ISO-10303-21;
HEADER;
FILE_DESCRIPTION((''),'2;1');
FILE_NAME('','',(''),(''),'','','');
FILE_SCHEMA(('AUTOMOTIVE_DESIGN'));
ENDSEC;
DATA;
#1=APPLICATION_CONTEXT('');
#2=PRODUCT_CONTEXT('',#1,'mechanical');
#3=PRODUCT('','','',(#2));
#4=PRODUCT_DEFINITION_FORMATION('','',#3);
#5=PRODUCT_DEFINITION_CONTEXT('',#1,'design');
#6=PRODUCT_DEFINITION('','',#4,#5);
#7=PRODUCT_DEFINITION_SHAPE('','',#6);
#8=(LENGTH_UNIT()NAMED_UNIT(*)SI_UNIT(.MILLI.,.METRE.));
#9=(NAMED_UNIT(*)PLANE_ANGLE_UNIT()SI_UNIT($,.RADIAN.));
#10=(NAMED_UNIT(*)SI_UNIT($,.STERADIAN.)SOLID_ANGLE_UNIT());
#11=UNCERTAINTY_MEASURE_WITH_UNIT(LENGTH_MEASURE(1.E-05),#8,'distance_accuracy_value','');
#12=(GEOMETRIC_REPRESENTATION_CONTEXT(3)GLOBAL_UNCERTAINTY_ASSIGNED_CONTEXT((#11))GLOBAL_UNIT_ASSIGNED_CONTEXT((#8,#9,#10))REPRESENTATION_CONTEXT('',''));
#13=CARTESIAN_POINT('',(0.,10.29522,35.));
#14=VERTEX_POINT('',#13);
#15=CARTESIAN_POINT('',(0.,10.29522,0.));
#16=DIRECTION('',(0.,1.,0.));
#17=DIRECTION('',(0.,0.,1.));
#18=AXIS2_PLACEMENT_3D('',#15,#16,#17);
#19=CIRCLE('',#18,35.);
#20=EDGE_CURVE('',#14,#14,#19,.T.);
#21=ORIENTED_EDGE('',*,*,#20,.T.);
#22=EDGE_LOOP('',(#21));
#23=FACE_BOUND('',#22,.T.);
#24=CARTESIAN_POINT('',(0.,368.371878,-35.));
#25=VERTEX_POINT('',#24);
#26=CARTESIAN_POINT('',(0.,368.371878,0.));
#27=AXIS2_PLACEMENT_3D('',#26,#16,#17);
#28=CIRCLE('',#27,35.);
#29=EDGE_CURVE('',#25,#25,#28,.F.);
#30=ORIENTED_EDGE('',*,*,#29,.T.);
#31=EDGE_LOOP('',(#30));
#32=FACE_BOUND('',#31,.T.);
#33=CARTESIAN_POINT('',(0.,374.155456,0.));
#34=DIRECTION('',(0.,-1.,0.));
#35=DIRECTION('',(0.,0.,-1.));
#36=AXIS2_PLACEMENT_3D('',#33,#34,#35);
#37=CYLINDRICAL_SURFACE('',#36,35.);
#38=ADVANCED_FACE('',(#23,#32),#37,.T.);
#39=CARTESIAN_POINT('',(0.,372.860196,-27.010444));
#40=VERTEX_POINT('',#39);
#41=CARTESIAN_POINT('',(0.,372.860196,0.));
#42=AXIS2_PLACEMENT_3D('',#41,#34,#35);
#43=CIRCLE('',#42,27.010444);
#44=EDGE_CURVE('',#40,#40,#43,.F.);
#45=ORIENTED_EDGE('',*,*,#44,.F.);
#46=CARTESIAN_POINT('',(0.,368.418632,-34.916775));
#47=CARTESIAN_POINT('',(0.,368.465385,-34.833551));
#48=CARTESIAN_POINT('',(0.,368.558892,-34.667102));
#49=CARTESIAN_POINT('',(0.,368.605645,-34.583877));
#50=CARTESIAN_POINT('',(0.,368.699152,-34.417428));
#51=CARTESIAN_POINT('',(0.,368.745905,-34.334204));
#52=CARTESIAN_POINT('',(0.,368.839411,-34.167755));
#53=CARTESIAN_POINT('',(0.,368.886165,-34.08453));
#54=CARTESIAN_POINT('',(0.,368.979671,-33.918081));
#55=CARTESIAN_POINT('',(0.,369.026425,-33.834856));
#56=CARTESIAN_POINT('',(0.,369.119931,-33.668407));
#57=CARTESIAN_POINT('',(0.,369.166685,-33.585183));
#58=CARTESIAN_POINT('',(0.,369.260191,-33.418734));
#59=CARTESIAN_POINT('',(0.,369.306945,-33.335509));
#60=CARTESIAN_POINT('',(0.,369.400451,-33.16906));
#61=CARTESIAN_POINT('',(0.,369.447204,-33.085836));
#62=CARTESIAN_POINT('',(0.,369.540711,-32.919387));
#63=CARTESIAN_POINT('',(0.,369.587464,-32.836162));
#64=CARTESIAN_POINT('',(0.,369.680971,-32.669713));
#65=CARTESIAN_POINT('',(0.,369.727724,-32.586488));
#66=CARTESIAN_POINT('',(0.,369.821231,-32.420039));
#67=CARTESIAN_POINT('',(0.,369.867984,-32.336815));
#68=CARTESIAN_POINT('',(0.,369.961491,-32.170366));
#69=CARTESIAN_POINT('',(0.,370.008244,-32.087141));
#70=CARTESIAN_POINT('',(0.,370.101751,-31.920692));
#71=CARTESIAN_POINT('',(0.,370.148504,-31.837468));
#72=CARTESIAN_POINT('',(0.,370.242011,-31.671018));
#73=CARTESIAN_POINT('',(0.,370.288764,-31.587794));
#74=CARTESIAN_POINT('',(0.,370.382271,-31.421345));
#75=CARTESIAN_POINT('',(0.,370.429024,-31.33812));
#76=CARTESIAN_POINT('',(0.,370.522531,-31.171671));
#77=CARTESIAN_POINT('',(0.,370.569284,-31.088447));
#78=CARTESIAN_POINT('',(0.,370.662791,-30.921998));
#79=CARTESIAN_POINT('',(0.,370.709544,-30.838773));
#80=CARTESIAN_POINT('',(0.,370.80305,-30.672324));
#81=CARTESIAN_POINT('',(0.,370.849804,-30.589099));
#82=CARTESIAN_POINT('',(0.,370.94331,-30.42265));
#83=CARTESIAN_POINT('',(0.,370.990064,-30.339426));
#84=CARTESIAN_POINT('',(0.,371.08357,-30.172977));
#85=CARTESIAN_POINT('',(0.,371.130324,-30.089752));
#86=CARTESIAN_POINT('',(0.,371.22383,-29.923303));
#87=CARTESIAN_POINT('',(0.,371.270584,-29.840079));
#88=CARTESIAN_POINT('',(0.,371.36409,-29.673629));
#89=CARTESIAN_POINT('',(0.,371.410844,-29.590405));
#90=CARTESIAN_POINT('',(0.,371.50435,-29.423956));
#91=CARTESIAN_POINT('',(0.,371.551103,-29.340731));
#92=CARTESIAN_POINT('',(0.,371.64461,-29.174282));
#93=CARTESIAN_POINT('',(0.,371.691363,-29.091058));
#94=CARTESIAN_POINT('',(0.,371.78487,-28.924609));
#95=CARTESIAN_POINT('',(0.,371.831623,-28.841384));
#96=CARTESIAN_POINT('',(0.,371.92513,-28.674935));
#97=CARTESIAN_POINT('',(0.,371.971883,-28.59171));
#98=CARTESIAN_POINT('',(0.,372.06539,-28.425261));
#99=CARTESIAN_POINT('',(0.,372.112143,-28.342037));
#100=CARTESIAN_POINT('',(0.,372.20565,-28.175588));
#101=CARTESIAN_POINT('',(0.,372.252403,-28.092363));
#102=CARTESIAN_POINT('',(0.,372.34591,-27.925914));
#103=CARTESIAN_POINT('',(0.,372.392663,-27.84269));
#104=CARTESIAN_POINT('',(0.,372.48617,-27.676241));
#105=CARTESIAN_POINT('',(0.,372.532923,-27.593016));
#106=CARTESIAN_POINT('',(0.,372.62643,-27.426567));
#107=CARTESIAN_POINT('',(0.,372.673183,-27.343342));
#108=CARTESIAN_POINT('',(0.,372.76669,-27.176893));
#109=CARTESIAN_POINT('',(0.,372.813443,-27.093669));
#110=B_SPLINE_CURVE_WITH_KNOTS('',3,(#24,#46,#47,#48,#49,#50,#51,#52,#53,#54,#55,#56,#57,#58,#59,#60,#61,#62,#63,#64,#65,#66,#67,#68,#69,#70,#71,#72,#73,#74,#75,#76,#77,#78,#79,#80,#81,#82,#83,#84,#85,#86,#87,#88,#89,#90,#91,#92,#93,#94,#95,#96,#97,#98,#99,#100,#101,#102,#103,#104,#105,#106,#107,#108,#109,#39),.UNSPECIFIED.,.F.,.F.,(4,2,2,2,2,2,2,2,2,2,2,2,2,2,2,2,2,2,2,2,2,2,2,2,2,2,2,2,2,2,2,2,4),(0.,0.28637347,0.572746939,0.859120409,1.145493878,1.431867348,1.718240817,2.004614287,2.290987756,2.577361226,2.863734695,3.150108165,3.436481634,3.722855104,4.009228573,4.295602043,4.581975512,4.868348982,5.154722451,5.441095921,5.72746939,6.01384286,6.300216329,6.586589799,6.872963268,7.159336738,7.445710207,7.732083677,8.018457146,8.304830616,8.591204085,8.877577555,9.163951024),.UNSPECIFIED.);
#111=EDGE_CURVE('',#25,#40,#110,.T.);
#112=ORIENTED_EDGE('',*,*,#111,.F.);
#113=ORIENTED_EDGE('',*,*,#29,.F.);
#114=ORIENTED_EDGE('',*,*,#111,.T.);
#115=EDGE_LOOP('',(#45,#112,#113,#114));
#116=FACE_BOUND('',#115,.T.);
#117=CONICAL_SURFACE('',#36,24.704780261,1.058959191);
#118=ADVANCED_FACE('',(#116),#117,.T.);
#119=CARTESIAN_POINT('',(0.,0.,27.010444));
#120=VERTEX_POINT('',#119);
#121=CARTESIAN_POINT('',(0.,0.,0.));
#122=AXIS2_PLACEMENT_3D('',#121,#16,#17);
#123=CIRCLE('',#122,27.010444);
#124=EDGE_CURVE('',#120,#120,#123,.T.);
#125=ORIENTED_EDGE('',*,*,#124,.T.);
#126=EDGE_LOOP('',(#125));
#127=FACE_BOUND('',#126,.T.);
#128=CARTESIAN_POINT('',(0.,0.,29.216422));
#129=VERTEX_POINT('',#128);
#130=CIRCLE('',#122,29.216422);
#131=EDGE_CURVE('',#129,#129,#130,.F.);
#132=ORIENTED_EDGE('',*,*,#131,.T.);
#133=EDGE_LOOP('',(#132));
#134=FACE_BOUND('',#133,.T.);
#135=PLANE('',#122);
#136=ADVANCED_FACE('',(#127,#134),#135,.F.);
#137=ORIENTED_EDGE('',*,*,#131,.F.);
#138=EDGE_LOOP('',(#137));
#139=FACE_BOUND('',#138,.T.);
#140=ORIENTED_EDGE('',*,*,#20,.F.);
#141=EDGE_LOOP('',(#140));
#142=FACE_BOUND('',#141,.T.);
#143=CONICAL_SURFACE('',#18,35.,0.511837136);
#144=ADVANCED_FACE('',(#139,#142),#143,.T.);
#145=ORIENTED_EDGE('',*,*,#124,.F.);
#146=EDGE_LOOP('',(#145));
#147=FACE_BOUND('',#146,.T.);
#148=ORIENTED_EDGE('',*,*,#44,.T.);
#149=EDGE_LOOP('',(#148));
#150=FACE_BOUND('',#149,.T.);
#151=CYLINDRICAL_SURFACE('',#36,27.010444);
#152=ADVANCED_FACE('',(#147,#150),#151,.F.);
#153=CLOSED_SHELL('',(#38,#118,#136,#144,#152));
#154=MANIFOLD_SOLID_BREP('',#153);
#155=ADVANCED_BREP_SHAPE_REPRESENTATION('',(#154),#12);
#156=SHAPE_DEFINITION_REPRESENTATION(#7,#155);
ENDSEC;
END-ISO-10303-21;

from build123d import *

# Parameters (mm, degrees)
SKETCH1_R           = 35
BOSS_EXTRUDE1_DEPTH = 374.155456
SKETCH2_R           = 27.010444237
CUT_EXTRUDE1_DEPTH  = 378.41529547
CHAMFER1_SIZE       = 5.783578
CHAMFER1_SIZE_2     = 10.29522


with BuildPart() as part:
    # Sketch1 → Boss-Extrude1 (new body)
    with BuildSketch(Plane(origin=(0, 0, 0), x_dir=(1, 0, 0), z_dir=(0, 1, 0))):
        with Locations(Location((0, 0, 0), (0, 0, 270))):
            Circle(SKETCH1_R)
    extrude(amount=BOSS_EXTRUDE1_DEPTH)

    # Sketch2 → Cut-Extrude1 (cut, through all)
    with BuildSketch(Plane(origin=(0, 0, 0), x_dir=(1, 0, 0), z_dir=(0, 1, 0))):
        with Locations(Location((0, 0, 0), (0, 0, 270))):
            Circle(SKETCH2_R)
    extrude(amount=CUT_EXTRUDE1_DEPTH, mode=Mode.SUBTRACT)

    # Chamfer1
    # the kernel refuses this chamfer: 10.29522, 5.783578 mm, written as the material it takes off along each edge
    with BuildSketch(Plane(origin=(0, 374.155456, 0), x_dir=(0, 0, 1), z_dir=(-1, 0, 0))) as chamfer1_piece_1:
        Polygon((35, -CHAMFER1_SIZE), (35 - CHAMFER1_SIZE_2, 0), (35, 0), align=None)
    revolve(axis=Axis((0, 374.155456, 0), (0, 1, 0)), mode=Mode.SUBTRACT)
    with BuildSketch(Plane(origin=(0, 0, 0), x_dir=(0, 0, 1), z_dir=(-1, 0, 0))) as chamfer1_piece_2:
        Polygon((35, CHAMFER1_SIZE_2), (35 - CHAMFER1_SIZE, 0), (35, 0), align=None)
    revolve(axis=Axis((0, 0, 0), (0, 1, 0)), mode=Mode.SUBTRACT)


solid = part.part
